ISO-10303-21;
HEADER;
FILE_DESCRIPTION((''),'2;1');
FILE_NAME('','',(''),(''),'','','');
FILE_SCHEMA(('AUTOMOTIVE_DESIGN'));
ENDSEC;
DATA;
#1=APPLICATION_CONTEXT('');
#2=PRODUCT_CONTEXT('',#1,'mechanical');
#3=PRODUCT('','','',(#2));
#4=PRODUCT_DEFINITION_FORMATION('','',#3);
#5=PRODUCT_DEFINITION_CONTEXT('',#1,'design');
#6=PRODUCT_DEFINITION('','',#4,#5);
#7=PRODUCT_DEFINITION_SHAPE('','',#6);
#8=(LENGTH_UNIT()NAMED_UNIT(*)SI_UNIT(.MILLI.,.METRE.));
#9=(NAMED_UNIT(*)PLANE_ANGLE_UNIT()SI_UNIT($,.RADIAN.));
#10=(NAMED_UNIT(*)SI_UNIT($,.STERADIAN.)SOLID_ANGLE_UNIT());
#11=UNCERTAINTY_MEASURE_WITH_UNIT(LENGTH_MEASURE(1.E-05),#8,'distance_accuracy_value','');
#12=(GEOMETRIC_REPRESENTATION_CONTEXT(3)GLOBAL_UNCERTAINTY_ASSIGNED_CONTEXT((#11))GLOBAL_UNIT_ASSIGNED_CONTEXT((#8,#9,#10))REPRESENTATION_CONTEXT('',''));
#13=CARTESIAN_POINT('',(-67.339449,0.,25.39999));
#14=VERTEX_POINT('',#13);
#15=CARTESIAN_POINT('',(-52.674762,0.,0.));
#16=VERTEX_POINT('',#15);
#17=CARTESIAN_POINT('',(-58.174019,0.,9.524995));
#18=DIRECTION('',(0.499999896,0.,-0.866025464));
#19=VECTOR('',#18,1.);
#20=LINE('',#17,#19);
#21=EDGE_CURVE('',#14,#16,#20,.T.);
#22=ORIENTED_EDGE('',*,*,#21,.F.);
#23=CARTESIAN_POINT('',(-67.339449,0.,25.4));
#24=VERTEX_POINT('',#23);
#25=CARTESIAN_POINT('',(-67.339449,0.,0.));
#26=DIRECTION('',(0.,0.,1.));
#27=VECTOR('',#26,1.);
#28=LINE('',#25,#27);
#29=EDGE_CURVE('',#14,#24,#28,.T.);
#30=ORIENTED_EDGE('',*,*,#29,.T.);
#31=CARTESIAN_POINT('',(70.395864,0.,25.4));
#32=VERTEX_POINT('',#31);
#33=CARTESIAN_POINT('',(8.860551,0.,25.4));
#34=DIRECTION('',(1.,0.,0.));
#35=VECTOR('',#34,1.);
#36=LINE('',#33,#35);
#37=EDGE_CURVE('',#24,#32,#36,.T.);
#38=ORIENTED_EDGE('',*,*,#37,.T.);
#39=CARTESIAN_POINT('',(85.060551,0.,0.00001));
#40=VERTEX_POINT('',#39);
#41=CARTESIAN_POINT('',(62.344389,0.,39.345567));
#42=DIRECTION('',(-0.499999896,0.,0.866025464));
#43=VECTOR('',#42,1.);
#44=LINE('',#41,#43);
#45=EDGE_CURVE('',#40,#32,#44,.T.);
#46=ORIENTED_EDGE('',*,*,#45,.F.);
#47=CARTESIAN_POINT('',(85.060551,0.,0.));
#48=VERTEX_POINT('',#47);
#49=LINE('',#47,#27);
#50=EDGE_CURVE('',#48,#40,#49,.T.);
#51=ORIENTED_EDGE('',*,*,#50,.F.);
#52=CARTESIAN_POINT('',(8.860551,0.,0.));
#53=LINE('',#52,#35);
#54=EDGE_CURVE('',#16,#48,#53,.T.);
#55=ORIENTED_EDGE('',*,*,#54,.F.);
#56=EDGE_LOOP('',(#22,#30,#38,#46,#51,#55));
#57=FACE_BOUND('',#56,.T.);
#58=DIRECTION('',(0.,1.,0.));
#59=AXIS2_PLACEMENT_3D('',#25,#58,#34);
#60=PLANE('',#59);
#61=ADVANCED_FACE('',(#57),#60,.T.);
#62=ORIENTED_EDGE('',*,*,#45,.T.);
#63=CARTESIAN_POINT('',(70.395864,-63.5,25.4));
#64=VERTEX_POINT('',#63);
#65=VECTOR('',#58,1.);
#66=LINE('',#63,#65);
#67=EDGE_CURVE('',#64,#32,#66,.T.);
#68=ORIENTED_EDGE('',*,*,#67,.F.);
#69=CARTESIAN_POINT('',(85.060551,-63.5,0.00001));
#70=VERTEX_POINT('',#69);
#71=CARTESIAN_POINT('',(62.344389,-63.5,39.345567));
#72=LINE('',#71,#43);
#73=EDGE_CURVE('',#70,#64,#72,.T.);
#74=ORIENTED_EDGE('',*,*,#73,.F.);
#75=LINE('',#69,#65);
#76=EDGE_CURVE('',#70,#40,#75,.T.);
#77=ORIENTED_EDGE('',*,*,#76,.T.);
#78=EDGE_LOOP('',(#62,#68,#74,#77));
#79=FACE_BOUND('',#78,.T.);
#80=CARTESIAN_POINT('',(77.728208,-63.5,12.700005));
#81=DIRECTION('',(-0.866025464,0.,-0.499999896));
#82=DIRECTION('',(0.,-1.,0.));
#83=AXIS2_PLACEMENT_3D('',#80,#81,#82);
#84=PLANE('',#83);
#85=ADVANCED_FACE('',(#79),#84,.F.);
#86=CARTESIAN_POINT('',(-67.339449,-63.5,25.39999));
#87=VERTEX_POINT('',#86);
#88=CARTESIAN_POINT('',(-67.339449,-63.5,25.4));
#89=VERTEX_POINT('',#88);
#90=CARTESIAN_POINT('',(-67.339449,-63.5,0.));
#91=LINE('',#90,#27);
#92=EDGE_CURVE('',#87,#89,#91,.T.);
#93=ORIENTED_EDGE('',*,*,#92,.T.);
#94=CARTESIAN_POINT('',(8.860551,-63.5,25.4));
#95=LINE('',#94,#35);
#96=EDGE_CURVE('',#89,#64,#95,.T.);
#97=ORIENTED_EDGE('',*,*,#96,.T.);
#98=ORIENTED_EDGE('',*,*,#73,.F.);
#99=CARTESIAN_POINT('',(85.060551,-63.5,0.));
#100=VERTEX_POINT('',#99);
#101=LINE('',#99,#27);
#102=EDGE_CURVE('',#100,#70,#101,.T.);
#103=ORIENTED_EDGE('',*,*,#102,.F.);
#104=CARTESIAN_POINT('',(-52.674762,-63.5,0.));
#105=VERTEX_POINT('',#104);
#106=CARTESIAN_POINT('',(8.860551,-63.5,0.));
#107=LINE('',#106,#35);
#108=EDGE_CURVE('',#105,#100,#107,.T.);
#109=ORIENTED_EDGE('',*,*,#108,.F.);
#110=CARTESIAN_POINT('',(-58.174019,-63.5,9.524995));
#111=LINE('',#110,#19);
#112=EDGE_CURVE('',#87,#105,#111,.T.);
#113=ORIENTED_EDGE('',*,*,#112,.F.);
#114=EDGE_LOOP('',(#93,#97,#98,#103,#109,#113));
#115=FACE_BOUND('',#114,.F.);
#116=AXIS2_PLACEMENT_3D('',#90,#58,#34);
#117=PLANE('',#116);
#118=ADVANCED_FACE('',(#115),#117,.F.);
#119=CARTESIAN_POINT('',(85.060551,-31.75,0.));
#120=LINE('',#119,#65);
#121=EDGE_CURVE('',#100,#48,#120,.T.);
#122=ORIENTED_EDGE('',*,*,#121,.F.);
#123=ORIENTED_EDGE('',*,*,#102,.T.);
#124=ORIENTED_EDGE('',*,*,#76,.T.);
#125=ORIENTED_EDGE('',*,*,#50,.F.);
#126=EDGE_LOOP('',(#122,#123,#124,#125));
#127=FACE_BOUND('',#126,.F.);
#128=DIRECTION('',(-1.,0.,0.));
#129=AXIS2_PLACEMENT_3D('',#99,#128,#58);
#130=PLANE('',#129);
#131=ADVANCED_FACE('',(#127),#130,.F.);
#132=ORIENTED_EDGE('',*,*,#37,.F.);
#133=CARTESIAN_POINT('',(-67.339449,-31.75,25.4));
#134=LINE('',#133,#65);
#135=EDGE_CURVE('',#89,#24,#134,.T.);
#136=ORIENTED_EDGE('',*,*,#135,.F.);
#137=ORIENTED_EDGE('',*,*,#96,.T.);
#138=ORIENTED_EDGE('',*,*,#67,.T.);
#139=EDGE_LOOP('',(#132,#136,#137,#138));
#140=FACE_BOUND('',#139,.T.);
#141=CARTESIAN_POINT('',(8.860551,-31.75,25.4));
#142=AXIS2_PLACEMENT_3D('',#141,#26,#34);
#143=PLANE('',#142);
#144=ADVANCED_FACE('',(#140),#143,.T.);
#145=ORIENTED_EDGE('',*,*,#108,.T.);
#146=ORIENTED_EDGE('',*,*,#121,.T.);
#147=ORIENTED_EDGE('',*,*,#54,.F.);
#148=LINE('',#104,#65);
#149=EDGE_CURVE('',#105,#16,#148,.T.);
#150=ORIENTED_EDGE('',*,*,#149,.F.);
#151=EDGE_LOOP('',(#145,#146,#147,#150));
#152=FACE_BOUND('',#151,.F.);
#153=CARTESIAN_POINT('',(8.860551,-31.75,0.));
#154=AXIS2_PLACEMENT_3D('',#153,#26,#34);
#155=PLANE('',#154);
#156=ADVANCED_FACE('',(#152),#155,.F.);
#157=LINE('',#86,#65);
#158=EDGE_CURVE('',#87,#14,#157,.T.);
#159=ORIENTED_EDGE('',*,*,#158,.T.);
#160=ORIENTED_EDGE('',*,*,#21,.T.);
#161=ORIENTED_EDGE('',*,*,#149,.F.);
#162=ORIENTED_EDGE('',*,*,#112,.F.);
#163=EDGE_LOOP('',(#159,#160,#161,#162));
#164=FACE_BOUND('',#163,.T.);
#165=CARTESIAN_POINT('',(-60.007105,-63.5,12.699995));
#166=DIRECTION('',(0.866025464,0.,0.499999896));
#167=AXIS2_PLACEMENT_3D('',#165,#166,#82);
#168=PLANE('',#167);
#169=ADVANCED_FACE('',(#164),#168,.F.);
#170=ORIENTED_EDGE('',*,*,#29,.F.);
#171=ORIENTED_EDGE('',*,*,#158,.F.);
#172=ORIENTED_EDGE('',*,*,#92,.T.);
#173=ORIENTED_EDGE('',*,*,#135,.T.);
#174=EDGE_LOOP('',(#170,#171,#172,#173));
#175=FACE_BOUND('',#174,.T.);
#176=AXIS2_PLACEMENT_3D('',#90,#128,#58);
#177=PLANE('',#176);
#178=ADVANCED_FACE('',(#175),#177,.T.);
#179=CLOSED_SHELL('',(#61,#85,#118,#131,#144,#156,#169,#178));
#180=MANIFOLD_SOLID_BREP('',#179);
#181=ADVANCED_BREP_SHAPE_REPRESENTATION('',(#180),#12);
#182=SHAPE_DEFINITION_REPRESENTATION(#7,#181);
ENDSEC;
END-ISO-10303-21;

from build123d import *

# Parameters (mm, degrees)
F0_W     = 152.4
F0_H     = 63.5
F1_DEPTH = 25.4
F2_SIZE2 = 14.664687
F2_SIZE  = 25.39999
F3_SIZE2 = 14.664687
F3_SIZE  = 25.39999


# Not quite as in the source:
# - a fillet or chamfer is up to 0.001 mm smaller than in the source, because OpenCascade refuses the exact size


with BuildPart() as f1:
    # F0 (on Top) → F1 (new body)
    with BuildSketch(Plane.XY):
        with Locations((8.8605511625, -31.75)):
            Rectangle(F0_W, F0_H)
    extrude(amount=F1_DEPTH)

    # F2 (size 25.4 and 14.6646968374 in the source; OpenCascade refuses exactly that, so slightly less here)
    f2_edges = [f1.edges().sort_by_distance(p)[0] for p in [
        (85.060551, -31.75, 25.4),
    ]]
    f2_side = f1.faces().sort_by_distance((85.060551, -31.75, 12.7))[0]
    chamfer(f2_edges, length=F2_SIZE, length2=F2_SIZE2, reference=f2_side)

    # F3 (size 25.4 and 14.6646968374 in the source; OpenCascade refuses exactly that, so slightly less here)
    f3_edges = [f1.edges().sort_by_distance(p)[0] for p in [
        (-67.339449, -31.75, 0),
    ]]
    f3_side = f1.faces().sort_by_distance((-67.339449, -31.75, 12.7))[0]
    chamfer(f3_edges, length=F3_SIZE, length2=F3_SIZE2, reference=f3_side)


solid = f1.part
